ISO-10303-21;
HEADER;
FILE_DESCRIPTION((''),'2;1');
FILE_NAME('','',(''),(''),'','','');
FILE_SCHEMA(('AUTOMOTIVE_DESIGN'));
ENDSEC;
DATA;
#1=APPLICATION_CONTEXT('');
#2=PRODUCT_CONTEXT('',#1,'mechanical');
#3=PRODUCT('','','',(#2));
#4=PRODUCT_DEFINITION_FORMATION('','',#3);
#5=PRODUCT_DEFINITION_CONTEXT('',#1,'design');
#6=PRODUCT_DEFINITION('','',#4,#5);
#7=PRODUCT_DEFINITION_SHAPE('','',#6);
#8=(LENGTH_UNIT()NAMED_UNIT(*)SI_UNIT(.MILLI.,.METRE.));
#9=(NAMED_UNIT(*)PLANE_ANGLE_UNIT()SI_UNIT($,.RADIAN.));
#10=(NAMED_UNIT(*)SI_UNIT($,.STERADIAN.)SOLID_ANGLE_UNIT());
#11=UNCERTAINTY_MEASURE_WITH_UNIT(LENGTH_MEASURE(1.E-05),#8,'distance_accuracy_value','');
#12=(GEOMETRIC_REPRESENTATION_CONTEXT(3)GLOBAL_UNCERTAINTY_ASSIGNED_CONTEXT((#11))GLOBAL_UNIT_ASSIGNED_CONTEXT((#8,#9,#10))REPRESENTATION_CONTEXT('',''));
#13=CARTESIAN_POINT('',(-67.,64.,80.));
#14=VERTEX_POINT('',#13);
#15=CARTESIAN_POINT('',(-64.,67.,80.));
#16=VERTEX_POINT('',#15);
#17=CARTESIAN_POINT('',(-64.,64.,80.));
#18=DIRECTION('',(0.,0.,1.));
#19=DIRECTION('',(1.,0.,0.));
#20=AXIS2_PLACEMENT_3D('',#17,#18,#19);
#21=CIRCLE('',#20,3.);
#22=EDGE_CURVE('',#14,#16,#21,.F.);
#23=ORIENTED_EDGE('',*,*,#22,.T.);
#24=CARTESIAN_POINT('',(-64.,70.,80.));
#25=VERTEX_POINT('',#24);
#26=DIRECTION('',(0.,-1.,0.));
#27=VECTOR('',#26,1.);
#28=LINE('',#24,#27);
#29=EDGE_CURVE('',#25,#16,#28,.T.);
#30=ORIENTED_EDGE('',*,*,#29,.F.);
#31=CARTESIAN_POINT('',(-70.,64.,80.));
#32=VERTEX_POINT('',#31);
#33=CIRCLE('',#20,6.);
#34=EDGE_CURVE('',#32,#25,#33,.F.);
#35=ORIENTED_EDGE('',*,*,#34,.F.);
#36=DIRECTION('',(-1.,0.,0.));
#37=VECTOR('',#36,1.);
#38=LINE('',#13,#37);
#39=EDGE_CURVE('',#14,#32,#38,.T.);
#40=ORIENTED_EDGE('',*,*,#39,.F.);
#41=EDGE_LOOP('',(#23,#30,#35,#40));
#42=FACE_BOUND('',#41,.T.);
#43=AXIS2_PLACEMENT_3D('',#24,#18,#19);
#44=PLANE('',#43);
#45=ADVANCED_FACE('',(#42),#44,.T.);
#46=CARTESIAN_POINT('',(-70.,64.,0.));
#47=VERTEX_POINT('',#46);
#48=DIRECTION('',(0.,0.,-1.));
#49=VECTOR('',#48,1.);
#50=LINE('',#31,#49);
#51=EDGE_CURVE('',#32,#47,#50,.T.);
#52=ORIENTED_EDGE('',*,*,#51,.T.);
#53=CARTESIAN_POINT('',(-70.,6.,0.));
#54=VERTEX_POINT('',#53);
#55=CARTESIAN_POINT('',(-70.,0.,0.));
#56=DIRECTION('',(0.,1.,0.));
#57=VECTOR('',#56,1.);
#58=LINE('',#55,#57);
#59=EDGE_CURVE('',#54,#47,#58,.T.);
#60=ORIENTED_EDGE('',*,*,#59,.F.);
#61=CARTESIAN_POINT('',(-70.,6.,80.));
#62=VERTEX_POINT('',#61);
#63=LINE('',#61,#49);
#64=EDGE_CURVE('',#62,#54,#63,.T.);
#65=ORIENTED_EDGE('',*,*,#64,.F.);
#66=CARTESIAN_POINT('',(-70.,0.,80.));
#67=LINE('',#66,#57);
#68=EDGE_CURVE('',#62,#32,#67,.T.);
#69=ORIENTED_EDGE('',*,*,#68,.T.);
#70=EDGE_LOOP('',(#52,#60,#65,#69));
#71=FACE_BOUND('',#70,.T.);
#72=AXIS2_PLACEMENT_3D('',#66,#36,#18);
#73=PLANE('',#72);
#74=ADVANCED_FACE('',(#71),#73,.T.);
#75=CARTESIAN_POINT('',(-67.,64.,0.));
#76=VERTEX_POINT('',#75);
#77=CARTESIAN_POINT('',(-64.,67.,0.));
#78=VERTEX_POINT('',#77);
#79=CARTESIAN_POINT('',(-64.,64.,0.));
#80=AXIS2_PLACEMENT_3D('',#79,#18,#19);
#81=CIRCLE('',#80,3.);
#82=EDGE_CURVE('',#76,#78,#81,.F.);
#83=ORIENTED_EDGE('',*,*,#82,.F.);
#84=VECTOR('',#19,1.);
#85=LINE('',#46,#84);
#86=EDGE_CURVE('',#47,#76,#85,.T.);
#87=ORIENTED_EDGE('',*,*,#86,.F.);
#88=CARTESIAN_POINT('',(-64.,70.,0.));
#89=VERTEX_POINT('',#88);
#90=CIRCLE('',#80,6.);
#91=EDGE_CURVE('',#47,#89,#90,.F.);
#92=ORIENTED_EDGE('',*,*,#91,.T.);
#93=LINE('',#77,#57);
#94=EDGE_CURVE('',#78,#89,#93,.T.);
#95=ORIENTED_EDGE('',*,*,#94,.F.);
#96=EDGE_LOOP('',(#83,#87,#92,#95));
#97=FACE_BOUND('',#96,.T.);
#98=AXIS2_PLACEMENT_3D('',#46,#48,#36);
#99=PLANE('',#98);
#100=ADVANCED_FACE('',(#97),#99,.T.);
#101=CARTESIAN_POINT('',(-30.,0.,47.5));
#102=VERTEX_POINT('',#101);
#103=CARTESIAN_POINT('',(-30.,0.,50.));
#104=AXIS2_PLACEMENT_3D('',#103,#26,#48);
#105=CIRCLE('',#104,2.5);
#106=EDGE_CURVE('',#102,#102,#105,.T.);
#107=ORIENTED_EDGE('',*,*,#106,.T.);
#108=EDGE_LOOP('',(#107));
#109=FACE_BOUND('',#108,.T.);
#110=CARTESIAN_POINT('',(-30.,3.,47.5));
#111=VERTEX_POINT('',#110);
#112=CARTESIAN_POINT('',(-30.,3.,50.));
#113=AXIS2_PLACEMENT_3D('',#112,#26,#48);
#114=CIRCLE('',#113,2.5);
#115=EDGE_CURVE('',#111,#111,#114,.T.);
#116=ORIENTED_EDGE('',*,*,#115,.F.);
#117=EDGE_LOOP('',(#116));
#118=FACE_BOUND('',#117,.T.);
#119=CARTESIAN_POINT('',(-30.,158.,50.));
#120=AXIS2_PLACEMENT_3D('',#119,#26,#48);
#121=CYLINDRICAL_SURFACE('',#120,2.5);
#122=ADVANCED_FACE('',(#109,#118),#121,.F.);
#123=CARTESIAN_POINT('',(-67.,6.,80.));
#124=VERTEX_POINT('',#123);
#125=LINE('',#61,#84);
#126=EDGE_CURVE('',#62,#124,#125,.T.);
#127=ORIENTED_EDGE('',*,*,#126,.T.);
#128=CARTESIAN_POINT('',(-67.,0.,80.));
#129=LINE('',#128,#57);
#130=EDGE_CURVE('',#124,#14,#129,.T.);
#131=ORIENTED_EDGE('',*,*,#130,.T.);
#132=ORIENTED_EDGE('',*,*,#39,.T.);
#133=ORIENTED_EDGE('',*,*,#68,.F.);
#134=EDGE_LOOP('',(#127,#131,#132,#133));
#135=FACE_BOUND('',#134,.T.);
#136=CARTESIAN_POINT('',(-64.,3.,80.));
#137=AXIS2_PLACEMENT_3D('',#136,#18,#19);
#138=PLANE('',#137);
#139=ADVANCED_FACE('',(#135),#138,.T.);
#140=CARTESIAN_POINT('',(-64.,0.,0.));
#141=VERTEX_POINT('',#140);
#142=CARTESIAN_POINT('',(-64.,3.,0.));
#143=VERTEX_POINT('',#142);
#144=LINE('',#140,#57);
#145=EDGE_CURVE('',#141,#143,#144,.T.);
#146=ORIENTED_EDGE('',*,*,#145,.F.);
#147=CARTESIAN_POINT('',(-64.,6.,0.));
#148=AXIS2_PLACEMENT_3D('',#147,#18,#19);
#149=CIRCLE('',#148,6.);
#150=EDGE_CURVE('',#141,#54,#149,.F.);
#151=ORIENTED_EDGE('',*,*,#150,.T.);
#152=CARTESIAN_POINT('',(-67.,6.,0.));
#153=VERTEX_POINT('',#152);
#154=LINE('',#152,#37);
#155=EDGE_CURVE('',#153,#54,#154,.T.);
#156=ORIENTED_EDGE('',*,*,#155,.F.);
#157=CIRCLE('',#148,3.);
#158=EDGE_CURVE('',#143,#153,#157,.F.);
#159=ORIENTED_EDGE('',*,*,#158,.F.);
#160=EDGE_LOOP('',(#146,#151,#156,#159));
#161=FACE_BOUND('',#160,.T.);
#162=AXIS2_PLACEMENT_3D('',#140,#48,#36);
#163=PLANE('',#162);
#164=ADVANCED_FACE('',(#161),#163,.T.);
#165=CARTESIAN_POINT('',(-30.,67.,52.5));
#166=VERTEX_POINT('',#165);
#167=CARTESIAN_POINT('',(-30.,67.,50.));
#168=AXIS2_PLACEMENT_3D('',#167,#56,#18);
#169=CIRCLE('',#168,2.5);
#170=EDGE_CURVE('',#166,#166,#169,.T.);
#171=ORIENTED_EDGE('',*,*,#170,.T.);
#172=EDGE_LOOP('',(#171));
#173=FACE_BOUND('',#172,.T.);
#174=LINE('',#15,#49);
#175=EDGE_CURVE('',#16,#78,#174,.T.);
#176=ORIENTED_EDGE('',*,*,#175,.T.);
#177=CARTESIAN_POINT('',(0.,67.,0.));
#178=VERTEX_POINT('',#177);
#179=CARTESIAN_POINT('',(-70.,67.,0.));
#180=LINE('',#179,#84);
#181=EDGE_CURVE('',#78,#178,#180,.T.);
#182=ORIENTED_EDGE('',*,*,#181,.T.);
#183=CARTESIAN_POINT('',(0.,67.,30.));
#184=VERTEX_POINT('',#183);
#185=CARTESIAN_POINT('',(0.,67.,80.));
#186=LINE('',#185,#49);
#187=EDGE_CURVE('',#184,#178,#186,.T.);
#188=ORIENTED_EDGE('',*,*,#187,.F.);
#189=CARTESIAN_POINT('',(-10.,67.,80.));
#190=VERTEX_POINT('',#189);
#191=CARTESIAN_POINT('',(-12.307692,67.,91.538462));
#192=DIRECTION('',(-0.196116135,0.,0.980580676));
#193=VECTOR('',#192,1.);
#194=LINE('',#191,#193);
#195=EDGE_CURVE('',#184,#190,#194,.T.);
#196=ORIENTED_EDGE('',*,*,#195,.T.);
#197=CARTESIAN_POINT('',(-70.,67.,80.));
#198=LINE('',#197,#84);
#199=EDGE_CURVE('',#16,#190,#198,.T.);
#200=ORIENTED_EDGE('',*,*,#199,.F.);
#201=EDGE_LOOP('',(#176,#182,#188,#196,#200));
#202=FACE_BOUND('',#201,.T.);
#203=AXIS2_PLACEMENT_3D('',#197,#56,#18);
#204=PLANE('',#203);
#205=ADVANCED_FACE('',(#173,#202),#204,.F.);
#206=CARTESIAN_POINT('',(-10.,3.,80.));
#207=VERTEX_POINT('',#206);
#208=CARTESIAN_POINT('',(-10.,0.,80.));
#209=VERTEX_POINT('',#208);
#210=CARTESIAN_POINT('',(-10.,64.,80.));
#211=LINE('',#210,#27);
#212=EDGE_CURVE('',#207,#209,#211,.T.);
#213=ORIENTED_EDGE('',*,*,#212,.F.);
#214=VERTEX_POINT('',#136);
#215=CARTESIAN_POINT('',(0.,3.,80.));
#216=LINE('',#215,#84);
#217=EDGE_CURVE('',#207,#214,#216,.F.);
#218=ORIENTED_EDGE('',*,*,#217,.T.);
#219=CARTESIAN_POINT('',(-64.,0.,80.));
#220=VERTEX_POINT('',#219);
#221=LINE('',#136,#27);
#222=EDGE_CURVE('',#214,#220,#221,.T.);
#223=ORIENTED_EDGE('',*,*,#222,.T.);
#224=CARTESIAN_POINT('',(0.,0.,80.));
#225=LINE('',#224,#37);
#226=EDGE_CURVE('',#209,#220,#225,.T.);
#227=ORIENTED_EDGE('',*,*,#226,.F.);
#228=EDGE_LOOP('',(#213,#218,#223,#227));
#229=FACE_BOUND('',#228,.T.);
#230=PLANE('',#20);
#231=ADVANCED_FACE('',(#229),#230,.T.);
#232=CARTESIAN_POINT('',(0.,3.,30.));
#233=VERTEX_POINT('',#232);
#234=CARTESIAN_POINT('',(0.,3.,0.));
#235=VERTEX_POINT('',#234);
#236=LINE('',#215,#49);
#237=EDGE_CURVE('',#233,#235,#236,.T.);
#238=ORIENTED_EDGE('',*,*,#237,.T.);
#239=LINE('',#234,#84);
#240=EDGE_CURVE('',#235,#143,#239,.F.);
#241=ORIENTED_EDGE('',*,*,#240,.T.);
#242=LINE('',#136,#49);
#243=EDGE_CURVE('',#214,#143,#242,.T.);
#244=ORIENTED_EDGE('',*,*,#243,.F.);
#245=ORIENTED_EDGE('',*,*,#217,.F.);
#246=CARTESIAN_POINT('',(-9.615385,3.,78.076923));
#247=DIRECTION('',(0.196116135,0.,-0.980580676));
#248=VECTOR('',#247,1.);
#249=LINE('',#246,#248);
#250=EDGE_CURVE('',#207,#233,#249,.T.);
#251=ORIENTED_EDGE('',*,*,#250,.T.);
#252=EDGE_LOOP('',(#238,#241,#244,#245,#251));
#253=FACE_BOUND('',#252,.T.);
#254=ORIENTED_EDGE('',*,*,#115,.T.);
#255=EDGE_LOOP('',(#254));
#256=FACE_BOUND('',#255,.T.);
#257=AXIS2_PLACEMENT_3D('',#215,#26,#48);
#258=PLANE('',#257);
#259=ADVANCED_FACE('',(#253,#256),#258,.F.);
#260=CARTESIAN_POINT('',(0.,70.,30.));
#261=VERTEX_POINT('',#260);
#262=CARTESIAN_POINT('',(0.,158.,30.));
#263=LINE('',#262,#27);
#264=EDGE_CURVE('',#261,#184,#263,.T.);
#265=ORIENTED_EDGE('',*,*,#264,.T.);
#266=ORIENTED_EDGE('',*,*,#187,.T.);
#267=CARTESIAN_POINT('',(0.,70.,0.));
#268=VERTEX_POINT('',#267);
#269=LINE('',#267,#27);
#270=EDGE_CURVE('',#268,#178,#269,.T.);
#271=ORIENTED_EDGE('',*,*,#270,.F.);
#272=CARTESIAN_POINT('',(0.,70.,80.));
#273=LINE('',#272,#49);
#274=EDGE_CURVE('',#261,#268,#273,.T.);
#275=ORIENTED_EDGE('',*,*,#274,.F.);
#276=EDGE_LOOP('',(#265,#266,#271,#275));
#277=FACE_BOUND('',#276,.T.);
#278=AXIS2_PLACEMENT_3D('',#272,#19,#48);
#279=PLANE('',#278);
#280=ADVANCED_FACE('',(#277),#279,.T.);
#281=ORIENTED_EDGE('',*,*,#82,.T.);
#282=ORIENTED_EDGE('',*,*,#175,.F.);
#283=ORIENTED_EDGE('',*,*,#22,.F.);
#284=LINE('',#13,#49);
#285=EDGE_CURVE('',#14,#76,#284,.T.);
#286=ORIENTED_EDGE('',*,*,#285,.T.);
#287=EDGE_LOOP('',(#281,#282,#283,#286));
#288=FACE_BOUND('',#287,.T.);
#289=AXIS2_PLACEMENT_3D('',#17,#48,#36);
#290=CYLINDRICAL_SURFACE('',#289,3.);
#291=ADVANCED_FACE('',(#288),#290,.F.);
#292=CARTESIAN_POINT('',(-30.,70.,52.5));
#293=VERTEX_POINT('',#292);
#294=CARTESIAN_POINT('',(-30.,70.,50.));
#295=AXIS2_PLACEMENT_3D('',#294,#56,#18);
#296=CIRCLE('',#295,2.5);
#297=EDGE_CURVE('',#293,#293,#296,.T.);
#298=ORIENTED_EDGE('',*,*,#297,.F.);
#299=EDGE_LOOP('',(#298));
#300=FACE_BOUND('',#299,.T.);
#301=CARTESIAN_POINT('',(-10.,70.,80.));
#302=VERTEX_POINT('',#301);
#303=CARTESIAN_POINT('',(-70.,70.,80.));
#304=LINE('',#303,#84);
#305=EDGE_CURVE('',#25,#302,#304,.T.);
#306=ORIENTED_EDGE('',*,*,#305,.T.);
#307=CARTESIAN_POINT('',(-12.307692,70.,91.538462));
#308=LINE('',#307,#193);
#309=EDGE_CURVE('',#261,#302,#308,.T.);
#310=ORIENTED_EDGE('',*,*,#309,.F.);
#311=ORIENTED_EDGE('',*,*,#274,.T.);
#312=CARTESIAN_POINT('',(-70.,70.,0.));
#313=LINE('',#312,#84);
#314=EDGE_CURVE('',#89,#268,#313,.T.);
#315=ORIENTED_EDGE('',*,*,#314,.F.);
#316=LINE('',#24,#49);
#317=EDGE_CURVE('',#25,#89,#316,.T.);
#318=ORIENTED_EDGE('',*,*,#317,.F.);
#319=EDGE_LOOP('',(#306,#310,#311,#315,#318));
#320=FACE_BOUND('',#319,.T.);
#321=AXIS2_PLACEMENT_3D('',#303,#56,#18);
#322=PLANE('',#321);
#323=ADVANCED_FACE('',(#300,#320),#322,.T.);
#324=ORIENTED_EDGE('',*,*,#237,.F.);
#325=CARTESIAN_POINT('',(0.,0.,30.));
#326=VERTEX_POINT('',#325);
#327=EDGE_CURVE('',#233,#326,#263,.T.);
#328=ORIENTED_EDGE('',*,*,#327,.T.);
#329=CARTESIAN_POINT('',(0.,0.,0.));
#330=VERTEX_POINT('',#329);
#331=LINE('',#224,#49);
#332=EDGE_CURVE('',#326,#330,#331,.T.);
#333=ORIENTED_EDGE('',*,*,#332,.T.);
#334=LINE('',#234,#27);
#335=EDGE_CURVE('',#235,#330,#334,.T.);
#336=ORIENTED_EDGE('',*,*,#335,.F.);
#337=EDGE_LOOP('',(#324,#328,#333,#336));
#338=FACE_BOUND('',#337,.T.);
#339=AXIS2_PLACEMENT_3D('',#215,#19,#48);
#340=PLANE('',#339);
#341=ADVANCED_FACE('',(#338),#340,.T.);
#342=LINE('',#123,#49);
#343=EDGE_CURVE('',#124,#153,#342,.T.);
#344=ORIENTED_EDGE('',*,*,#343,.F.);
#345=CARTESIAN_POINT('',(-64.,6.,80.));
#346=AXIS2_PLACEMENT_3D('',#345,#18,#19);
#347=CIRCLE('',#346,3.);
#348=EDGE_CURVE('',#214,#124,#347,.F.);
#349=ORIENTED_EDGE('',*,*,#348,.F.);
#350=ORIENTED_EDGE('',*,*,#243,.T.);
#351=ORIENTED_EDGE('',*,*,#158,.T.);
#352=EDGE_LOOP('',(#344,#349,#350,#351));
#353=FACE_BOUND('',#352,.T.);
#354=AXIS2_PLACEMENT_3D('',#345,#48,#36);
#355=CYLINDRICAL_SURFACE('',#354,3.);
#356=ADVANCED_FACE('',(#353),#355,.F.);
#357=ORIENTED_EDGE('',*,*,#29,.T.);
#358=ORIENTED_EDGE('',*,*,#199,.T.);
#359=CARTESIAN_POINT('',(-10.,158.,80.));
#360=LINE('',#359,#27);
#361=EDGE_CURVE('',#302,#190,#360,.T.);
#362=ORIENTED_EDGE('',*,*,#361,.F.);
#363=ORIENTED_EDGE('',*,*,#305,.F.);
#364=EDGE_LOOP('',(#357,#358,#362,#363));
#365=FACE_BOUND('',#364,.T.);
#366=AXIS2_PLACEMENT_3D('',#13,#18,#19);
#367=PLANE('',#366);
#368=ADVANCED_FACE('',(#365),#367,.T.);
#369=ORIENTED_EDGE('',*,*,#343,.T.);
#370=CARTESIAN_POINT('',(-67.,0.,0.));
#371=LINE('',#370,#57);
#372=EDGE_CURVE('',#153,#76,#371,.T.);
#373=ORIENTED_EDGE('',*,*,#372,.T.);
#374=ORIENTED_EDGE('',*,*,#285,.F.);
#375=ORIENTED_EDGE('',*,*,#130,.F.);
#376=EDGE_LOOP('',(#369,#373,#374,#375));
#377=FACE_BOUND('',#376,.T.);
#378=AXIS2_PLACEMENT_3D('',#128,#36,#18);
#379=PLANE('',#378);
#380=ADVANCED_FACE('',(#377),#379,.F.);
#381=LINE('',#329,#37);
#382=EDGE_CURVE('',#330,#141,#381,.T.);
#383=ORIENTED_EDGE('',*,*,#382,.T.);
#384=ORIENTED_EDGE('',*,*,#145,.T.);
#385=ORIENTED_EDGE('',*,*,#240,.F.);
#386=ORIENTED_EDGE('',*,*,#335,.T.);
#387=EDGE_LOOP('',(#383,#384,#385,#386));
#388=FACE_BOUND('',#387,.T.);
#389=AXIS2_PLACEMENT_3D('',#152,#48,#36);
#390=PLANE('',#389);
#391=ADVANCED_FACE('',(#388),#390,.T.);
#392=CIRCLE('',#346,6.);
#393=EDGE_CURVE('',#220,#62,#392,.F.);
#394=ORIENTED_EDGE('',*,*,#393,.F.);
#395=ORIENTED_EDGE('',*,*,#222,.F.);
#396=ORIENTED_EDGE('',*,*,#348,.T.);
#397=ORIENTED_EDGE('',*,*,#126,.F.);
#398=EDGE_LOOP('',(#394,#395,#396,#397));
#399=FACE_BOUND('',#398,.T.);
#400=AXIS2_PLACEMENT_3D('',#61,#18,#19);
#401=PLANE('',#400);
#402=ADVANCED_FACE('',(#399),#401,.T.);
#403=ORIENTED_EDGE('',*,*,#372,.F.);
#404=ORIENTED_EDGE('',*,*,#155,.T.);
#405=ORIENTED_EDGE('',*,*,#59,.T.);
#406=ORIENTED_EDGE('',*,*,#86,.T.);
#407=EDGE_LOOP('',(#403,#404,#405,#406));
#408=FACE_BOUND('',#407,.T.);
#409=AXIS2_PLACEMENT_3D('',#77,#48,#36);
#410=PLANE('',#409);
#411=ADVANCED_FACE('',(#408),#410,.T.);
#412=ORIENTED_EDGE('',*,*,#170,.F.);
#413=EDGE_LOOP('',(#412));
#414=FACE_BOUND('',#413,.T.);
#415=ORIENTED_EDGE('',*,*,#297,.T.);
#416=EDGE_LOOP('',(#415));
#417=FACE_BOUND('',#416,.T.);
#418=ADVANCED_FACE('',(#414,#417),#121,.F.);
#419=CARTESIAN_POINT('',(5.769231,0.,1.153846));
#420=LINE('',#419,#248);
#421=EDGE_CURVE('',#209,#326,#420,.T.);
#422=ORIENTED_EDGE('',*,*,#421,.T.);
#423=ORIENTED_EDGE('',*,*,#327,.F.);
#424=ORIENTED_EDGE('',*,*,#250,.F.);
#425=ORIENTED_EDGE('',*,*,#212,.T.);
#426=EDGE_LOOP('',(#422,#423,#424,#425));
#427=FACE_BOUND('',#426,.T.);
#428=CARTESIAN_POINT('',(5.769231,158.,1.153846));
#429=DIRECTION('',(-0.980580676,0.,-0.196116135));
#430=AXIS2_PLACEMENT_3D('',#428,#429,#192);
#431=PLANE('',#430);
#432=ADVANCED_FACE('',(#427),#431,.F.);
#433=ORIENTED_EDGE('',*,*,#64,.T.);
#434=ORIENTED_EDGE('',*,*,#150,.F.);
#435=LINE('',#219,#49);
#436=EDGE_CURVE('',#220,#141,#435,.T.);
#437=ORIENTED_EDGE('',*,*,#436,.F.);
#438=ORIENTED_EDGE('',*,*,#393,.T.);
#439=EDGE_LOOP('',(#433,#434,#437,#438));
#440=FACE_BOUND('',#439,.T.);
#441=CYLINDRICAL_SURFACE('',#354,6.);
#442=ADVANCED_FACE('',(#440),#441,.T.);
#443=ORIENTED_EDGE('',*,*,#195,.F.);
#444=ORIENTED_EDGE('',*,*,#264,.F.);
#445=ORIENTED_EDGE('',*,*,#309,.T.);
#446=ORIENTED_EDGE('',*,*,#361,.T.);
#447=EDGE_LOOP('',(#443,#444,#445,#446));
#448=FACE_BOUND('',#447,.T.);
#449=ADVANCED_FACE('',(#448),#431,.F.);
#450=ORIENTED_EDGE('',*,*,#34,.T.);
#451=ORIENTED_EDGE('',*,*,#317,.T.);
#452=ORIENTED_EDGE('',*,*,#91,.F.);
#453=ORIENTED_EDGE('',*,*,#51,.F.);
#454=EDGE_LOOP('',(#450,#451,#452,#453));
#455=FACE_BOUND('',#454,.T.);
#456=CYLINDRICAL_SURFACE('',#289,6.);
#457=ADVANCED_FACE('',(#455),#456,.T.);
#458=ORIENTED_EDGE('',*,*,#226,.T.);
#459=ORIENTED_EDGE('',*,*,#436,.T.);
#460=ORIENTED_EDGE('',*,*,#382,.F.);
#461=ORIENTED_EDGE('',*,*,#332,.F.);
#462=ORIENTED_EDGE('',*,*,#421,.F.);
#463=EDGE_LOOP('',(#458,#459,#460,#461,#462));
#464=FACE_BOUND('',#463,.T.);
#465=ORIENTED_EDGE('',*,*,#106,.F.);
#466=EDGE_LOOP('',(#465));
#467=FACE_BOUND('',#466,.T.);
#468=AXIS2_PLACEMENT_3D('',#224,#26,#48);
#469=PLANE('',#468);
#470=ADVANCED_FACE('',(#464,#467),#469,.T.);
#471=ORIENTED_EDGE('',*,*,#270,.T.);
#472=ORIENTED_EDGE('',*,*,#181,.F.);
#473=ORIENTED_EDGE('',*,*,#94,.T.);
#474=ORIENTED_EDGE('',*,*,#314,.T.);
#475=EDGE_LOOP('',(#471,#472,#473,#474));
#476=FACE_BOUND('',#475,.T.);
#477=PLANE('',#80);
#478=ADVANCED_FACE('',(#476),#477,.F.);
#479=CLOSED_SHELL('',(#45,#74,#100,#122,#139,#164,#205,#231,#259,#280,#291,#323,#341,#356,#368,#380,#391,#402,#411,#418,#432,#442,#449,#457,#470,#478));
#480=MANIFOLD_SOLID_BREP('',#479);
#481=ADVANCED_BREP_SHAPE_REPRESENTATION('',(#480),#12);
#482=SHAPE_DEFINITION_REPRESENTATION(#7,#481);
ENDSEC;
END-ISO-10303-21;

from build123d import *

# Parameters (mm, degrees)
BASE_FLANGE1_DEPTH = 80
CUT_EXTRUDE1_DEPTH = 158
SKETCH7_R          = 2.5
CUT_EXTRUDE2_DEPTH = 158


# Sheet-metal steps are written as plain solids
with BuildPart() as part:
    # Sketch1 → Base-Flange1 (new body)
    with BuildSketch(Plane.XY):
        with BuildLine():
            Line((0, 0), (-64, 0))
            ThreePointArc((-64, 0), (-68.242640687, 1.757359313), (-70, 6))
            Line((-70, 6), (-70, 64))
            ThreePointArc((-70, 64), (-68.242640687, 68.242640687), (-64, 70))
            Line((-64, 70), (0, 70))
            Line((0, 70), (0, 67))
            Line((0, 67), (-64, 67))
            ThreePointArc((-64, 67), (-66.121320344, 66.121320344), (-67, 64))
            Line((-67, 64), (-67, 6))
            ThreePointArc((-67, 6), (-66.121320344, 3.878679656), (-64, 3))
            Line((-64, 3), (0, 3))
            Line((0, 3), (0, 0))
        make_face()
    extrude(amount=BASE_FLANGE1_DEPTH)

    # Sketch6 → Cut-Extrude1 (cut)
    with BuildSketch(Plane.XZ):
        Polygon((0, 80), (-10, 80), (0, 30), align=None)
    extrude(amount=-CUT_EXTRUDE1_DEPTH, mode=Mode.SUBTRACT)

    # Sketch7 → Cut-Extrude2 (cut)
    with BuildSketch(Plane.XZ):
        with Locations(Location((-30, 50, 0), (0, 0, 270))):
            Circle(SKETCH7_R)
    extrude(amount=-CUT_EXTRUDE2_DEPTH, mode=Mode.SUBTRACT)


solid = part.part
